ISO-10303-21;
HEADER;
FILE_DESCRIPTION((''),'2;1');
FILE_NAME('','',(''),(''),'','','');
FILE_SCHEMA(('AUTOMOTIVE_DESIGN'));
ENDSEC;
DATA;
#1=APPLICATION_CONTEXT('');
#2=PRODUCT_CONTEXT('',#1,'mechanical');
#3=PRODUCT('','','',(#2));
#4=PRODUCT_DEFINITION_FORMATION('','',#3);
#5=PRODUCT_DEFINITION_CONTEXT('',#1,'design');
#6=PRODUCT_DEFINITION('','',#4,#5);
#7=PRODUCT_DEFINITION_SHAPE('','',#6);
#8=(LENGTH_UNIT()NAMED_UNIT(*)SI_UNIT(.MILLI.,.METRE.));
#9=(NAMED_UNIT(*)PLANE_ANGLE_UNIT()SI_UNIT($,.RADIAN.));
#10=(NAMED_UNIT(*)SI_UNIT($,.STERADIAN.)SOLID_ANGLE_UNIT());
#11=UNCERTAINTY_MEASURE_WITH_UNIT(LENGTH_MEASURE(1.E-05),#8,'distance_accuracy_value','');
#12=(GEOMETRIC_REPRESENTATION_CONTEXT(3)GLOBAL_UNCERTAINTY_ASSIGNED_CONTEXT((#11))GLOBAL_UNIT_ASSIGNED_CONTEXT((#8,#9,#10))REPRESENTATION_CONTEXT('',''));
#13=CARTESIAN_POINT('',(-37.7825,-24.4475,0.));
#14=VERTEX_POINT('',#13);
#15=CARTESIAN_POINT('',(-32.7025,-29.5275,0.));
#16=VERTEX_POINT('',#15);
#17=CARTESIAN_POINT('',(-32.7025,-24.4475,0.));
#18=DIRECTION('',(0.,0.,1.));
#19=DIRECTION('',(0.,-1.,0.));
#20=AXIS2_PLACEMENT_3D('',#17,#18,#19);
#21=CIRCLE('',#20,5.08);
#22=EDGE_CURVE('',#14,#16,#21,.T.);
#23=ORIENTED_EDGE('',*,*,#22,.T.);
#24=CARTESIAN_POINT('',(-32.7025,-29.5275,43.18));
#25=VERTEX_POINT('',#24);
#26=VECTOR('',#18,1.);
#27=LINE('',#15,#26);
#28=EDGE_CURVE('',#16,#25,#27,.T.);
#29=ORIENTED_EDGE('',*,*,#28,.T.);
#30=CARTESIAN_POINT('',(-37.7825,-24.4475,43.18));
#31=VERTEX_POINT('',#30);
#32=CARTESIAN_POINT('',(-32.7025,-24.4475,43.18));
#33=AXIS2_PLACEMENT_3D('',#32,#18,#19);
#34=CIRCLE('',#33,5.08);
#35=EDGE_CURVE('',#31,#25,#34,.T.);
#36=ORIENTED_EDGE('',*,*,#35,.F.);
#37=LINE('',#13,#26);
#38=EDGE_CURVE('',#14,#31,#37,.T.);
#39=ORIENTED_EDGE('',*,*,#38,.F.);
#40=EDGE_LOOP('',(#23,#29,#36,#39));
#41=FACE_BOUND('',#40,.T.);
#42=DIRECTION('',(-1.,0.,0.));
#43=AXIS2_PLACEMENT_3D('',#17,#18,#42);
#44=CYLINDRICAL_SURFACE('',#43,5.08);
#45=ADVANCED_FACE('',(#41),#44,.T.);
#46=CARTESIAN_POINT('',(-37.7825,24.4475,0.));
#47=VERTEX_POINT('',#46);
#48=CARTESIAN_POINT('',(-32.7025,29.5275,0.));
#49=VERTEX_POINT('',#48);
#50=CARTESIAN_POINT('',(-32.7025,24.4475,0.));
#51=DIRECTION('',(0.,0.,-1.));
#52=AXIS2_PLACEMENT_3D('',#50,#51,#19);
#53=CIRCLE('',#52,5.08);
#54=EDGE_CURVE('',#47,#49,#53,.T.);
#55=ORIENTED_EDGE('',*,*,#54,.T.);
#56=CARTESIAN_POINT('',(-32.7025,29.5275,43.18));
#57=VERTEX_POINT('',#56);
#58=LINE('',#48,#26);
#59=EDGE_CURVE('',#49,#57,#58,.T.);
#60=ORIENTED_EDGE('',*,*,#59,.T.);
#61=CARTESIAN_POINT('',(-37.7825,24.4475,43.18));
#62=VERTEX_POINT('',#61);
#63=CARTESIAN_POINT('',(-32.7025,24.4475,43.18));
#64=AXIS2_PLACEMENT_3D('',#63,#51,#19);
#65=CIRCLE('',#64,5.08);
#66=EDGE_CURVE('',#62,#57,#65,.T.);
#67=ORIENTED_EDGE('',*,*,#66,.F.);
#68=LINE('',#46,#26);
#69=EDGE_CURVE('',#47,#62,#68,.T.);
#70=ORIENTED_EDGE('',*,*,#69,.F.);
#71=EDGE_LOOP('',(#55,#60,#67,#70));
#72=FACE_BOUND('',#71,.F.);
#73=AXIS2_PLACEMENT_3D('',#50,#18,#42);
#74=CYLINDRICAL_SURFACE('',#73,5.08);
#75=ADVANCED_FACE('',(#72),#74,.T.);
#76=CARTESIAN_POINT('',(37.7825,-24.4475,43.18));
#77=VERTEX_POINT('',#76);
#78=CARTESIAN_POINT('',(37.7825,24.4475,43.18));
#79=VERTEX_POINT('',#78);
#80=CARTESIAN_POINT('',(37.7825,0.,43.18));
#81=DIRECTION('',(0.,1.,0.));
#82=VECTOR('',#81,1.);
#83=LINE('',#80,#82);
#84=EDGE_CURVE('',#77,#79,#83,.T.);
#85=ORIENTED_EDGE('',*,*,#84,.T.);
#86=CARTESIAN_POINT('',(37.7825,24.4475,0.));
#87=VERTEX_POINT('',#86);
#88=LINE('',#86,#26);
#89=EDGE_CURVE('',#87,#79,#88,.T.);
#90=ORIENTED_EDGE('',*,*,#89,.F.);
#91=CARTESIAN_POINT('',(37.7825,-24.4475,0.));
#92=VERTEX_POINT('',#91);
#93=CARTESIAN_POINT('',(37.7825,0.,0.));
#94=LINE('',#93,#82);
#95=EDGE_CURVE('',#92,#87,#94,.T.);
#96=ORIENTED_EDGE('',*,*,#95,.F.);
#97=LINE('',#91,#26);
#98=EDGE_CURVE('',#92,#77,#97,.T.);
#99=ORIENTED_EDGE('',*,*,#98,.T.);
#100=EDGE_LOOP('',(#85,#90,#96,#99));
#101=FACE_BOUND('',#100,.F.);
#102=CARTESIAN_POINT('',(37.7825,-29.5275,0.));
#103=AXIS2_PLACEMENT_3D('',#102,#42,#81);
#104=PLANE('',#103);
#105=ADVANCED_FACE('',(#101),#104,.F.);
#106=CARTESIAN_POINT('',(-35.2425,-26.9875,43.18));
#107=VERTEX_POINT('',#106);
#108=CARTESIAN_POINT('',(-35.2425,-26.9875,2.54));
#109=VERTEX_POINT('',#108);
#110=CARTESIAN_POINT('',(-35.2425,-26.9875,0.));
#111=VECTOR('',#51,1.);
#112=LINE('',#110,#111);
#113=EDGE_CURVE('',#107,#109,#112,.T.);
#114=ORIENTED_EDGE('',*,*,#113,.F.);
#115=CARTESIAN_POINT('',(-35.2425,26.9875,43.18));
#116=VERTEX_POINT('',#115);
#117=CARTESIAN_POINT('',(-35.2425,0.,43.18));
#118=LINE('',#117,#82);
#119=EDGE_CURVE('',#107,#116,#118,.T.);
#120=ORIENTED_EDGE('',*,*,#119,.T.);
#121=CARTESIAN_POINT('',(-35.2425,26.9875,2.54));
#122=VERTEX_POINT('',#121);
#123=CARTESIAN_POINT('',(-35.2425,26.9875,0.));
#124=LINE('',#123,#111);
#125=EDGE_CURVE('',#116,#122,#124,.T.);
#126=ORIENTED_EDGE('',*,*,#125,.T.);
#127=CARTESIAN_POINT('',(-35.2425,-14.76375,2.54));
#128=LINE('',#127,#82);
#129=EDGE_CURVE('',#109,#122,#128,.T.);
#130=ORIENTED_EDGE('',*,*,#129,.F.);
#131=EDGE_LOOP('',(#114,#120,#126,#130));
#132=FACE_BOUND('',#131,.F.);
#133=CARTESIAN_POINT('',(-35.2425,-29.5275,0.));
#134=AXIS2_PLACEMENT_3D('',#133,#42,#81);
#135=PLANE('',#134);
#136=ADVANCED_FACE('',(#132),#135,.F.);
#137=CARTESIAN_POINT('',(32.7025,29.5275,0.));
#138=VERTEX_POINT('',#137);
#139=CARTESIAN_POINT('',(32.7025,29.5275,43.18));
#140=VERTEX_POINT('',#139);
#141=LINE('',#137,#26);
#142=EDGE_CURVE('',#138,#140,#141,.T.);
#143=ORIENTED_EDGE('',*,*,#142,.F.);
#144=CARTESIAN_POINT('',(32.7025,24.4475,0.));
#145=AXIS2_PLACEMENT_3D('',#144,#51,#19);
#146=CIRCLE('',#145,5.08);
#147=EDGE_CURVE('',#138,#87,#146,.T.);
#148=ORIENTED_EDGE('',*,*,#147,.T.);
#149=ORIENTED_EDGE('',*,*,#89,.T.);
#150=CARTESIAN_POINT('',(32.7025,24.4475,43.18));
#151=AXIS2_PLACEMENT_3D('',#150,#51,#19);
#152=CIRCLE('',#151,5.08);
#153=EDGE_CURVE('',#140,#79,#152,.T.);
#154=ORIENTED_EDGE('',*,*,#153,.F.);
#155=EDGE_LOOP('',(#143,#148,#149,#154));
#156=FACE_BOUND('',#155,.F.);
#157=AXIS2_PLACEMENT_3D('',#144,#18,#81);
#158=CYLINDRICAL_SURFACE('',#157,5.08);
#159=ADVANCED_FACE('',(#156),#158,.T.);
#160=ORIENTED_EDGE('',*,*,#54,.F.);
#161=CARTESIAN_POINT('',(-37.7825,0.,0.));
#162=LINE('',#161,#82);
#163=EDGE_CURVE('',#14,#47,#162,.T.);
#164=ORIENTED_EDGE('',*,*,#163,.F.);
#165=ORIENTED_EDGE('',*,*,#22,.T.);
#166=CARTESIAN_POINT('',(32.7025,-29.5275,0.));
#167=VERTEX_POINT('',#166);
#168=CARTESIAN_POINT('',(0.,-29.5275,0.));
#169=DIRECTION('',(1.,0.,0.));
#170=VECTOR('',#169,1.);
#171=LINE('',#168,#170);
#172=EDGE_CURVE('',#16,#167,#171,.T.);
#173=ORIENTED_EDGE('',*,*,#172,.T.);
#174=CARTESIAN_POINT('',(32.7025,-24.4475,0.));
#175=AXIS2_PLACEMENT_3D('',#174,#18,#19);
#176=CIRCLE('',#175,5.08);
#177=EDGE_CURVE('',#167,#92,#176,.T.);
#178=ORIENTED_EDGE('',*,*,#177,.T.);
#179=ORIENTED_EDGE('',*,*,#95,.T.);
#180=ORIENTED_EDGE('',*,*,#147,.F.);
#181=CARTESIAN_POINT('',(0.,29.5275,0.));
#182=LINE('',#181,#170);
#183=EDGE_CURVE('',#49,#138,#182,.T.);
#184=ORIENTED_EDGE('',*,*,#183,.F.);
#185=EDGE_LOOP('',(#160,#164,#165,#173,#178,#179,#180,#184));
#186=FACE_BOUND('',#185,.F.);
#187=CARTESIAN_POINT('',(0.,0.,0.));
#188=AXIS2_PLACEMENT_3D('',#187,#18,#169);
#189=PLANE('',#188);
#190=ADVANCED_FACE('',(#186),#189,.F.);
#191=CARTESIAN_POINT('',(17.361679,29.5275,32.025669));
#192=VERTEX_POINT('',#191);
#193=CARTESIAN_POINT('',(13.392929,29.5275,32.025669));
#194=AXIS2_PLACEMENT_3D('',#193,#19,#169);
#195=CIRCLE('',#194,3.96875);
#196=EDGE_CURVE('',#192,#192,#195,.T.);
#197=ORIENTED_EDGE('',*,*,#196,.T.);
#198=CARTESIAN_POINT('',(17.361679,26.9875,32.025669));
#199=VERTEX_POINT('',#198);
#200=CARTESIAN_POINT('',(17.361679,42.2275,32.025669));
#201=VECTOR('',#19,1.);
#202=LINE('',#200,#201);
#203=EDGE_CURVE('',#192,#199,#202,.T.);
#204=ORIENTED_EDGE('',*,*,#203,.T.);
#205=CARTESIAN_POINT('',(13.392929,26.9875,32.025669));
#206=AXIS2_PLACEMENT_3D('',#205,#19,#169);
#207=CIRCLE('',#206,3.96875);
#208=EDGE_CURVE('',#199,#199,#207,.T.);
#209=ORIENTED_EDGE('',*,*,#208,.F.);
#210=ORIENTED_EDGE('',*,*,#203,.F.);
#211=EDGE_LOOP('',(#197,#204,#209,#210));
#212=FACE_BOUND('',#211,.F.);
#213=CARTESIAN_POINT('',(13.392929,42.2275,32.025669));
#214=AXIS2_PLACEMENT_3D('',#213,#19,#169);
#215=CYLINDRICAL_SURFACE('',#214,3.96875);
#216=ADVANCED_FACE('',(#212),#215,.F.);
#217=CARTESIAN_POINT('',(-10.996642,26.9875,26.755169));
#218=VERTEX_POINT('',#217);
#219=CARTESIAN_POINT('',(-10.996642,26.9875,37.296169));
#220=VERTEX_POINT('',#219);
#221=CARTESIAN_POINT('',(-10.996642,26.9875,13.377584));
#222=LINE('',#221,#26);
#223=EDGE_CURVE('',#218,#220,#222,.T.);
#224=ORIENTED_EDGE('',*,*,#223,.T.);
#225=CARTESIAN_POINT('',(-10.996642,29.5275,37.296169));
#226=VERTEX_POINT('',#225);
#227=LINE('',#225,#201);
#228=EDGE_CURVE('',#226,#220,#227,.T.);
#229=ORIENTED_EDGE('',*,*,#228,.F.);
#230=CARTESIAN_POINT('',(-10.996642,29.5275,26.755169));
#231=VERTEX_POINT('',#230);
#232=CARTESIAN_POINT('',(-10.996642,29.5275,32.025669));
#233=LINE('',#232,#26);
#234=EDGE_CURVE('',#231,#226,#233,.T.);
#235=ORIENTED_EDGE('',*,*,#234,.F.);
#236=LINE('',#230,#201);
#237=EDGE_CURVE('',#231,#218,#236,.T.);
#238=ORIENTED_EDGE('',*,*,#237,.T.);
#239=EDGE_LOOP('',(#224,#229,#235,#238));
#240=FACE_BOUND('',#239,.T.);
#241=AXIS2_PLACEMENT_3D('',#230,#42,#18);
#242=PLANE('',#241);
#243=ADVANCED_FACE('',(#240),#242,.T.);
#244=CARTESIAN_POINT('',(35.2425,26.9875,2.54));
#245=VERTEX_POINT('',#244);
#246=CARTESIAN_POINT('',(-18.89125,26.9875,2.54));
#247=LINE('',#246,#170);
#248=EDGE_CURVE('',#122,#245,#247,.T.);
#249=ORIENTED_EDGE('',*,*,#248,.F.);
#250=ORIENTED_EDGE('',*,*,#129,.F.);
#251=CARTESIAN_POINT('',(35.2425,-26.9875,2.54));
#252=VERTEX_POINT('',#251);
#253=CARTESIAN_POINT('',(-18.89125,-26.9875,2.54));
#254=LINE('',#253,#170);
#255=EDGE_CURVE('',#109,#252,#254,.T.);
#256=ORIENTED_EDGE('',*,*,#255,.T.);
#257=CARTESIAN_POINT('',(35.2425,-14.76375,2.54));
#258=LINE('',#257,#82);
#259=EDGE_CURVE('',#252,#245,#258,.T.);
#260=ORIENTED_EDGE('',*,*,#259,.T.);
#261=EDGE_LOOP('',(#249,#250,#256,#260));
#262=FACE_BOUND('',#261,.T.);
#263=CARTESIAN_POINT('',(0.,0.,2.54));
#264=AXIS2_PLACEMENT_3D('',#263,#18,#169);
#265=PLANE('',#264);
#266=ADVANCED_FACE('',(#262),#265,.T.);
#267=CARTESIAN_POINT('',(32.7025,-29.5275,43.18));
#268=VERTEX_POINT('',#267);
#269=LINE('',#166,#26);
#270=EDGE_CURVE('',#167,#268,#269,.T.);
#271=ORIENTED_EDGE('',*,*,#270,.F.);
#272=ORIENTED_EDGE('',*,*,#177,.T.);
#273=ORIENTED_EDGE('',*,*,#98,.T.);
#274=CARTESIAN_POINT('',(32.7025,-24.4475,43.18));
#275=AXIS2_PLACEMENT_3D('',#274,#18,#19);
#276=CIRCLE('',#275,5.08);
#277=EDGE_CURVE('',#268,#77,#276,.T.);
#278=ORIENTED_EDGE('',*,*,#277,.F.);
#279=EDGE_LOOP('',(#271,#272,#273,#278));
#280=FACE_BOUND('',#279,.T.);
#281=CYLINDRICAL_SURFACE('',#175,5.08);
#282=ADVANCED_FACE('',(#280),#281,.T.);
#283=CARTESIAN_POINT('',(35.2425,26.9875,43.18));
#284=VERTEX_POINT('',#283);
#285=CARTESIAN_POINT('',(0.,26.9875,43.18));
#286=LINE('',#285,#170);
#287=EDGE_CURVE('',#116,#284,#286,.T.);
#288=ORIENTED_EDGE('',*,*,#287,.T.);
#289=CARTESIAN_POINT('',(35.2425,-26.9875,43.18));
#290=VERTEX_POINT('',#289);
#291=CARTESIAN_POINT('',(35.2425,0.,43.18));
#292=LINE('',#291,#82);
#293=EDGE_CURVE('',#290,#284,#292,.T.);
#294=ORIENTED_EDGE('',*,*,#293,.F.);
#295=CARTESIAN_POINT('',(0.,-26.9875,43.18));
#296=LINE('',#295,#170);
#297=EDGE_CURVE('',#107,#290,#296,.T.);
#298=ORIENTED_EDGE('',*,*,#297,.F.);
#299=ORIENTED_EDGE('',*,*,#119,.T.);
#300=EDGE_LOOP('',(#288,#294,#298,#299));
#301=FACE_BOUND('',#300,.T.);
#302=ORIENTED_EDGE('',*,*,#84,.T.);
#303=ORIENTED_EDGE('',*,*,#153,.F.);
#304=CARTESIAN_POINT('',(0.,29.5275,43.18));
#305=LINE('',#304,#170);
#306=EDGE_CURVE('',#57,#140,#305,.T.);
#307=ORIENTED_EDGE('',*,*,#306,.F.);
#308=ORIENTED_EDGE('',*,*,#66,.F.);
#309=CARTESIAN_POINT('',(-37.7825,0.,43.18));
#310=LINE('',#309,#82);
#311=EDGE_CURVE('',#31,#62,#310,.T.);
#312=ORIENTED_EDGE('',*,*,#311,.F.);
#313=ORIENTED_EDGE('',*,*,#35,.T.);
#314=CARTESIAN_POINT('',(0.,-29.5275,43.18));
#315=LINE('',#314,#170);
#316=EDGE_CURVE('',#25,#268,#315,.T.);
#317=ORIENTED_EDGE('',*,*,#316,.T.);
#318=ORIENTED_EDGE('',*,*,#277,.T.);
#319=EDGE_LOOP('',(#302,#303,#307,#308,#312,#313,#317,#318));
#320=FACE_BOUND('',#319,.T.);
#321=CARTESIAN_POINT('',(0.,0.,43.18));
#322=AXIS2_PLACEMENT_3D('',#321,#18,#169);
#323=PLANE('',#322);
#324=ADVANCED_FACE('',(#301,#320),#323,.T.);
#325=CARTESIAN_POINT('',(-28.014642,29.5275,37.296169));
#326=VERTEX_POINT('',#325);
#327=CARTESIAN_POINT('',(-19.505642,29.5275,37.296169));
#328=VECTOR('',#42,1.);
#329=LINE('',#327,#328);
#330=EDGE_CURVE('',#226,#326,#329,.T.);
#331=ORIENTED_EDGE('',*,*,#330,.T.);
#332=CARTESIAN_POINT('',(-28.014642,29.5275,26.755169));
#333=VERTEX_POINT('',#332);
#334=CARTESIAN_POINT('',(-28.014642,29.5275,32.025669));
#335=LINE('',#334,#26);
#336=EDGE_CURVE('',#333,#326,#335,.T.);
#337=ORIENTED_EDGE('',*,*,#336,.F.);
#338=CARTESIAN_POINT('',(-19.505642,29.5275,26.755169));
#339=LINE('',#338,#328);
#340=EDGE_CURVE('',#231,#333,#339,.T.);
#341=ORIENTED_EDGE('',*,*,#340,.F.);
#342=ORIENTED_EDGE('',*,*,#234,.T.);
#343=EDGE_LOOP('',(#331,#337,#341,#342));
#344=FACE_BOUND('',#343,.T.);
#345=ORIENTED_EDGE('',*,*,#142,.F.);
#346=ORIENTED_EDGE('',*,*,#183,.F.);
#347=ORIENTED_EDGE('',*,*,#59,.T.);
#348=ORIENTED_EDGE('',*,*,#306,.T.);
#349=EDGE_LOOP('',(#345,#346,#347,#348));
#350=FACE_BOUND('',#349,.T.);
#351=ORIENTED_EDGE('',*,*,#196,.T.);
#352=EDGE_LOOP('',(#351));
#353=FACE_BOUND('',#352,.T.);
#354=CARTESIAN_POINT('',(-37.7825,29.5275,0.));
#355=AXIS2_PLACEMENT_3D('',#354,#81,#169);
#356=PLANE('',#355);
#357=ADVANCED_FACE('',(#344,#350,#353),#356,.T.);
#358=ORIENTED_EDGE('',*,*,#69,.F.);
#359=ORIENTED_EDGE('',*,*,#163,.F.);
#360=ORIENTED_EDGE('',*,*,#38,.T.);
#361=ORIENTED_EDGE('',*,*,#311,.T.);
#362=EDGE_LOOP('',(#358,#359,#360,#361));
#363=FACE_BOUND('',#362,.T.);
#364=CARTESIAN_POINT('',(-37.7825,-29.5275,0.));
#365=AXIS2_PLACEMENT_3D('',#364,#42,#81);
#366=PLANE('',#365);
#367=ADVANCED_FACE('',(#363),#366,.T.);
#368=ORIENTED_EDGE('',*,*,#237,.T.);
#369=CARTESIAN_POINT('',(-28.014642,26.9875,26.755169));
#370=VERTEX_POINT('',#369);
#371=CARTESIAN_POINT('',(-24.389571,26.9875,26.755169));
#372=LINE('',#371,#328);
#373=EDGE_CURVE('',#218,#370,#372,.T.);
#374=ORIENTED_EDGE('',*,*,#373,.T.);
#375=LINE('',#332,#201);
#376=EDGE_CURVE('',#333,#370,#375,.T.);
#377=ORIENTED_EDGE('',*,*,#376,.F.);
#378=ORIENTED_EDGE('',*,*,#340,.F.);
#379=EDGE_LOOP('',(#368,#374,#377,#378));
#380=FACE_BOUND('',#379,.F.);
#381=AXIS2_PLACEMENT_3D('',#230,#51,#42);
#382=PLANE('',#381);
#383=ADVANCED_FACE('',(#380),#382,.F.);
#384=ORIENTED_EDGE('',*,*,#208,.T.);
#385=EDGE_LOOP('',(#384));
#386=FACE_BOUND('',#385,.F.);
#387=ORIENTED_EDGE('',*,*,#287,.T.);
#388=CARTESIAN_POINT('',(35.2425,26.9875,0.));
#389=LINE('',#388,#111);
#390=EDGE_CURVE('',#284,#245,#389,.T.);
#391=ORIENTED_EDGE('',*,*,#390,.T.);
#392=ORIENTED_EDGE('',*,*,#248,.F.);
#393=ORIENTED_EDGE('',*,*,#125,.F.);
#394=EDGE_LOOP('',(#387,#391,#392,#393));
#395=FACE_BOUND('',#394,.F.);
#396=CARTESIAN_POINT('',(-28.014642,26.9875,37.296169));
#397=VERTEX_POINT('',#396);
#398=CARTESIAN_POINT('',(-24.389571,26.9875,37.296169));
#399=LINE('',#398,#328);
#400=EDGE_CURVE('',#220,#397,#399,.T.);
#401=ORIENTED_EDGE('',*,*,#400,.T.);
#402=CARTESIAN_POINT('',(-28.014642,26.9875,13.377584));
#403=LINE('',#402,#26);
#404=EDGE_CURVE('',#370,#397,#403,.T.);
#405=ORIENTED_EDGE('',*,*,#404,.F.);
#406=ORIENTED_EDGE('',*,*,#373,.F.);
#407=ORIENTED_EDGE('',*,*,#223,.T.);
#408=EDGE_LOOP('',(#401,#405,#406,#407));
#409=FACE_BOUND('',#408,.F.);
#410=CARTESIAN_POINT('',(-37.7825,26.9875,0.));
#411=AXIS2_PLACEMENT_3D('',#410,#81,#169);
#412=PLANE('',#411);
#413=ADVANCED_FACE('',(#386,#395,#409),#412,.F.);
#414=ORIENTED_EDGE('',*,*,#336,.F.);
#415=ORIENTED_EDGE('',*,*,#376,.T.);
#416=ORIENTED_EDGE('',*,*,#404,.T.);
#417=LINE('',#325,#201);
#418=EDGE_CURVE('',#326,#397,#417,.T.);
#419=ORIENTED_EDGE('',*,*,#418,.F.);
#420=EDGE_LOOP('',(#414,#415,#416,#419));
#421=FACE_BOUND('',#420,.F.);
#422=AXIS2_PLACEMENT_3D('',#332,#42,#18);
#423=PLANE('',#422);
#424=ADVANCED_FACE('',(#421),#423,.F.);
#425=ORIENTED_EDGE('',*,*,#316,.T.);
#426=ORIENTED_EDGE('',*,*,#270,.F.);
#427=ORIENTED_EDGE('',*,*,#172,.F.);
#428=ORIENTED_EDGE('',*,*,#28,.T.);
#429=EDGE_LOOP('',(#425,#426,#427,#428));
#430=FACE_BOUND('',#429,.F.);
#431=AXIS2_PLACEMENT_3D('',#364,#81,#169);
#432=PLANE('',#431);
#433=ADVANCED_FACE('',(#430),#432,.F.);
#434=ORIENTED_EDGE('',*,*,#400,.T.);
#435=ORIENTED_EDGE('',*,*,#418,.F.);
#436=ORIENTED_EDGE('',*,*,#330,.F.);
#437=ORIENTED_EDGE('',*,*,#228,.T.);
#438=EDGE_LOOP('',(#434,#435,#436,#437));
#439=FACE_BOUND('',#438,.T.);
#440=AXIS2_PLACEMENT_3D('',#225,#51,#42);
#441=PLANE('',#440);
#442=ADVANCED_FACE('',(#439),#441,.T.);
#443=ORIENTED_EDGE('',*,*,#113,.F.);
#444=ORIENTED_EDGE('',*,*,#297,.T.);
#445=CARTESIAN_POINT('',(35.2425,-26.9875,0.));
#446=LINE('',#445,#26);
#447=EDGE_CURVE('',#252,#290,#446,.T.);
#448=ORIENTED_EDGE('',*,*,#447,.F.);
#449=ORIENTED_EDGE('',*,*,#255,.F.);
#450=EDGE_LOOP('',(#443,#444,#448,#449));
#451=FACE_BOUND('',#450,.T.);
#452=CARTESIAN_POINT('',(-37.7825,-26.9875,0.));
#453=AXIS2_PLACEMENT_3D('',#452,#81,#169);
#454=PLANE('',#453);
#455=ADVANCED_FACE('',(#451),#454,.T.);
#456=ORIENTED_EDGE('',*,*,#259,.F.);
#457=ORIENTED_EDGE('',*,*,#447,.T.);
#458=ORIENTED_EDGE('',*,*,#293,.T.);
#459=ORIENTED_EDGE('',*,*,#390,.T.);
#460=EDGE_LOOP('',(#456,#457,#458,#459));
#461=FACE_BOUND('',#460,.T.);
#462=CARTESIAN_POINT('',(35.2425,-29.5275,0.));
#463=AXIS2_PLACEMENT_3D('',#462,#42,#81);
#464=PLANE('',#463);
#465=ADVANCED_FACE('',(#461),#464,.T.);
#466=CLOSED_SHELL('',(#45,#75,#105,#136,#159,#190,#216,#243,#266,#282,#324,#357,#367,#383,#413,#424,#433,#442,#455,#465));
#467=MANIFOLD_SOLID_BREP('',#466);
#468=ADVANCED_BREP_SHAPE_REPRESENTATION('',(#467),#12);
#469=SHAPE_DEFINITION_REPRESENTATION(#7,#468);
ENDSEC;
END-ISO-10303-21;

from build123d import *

# Parameters (mm, degrees)
F0_W     = 75.565
F0_H     = 59.055
F1_DEPTH = 43.18
F2_T     = -2.54
F3_W     = 17.018
F3_H     = 10.541
F4_DEPTH = 3.302
F6_D     = 7.9375
F6_DEPTH = 12.7
F6_TIP   = 2.3846655818
F7_R     = 5.08


# Not quite as in the source:
# - a feature names something its author has since deleted; it is built from what else it names


with BuildPart() as f1:
    # F0 (on Top) → F1 (new body)
    with BuildSketch(Plane.XY):
        Rectangle(F0_W, F0_H)
    extrude(amount=F1_DEPTH)

    # F2
    f2_openings = [f1.faces().sort_by_distance(p)[0] for p in [
        (0, 0, 43.18),
    ]]
    offset(amount=F2_T, openings=f2_openings)

    # F3 (on face) → F4 (cut)
    with BuildSketch(Plane(origin=(0, 29.5275, 0), x_dir=(-1, 0, 0), z_dir=(0, 1, 0))):
        with Locations((19.5056423545, 32.0256687701)):
            Rectangle(F3_W, F3_H)
    extrude(amount=-F4_DEPTH, mode=Mode.SUBTRACT)

    # F6
    with Locations(Plane(origin=(0, 29.5275, 0), x_dir=(-1, 0, 0), z_dir=(0, 1, 0))):
        with Locations((-13.3929288228, 32.0256687701)):
            Hole(F6_D / 2, depth=F6_DEPTH)
            with Locations((0, 0, -(F6_DEPTH + F6_TIP / 2))):  # 118° drill point
                Cone(0, F6_D / 2, F6_TIP, mode=Mode.SUBTRACT)

    # F7
    f7_edges = [f1.edges().sort_by_distance(p)[0] for p in [
        (-37.7825, -29.5275, 21.59),
        (37.7825, -29.5275, 21.59),
        (37.7825, 29.5275, 21.59),
        (-37.7825, 29.5275, 21.59),
    ]]
    fillet(f7_edges, radius=F7_R)


solid = f1.part
